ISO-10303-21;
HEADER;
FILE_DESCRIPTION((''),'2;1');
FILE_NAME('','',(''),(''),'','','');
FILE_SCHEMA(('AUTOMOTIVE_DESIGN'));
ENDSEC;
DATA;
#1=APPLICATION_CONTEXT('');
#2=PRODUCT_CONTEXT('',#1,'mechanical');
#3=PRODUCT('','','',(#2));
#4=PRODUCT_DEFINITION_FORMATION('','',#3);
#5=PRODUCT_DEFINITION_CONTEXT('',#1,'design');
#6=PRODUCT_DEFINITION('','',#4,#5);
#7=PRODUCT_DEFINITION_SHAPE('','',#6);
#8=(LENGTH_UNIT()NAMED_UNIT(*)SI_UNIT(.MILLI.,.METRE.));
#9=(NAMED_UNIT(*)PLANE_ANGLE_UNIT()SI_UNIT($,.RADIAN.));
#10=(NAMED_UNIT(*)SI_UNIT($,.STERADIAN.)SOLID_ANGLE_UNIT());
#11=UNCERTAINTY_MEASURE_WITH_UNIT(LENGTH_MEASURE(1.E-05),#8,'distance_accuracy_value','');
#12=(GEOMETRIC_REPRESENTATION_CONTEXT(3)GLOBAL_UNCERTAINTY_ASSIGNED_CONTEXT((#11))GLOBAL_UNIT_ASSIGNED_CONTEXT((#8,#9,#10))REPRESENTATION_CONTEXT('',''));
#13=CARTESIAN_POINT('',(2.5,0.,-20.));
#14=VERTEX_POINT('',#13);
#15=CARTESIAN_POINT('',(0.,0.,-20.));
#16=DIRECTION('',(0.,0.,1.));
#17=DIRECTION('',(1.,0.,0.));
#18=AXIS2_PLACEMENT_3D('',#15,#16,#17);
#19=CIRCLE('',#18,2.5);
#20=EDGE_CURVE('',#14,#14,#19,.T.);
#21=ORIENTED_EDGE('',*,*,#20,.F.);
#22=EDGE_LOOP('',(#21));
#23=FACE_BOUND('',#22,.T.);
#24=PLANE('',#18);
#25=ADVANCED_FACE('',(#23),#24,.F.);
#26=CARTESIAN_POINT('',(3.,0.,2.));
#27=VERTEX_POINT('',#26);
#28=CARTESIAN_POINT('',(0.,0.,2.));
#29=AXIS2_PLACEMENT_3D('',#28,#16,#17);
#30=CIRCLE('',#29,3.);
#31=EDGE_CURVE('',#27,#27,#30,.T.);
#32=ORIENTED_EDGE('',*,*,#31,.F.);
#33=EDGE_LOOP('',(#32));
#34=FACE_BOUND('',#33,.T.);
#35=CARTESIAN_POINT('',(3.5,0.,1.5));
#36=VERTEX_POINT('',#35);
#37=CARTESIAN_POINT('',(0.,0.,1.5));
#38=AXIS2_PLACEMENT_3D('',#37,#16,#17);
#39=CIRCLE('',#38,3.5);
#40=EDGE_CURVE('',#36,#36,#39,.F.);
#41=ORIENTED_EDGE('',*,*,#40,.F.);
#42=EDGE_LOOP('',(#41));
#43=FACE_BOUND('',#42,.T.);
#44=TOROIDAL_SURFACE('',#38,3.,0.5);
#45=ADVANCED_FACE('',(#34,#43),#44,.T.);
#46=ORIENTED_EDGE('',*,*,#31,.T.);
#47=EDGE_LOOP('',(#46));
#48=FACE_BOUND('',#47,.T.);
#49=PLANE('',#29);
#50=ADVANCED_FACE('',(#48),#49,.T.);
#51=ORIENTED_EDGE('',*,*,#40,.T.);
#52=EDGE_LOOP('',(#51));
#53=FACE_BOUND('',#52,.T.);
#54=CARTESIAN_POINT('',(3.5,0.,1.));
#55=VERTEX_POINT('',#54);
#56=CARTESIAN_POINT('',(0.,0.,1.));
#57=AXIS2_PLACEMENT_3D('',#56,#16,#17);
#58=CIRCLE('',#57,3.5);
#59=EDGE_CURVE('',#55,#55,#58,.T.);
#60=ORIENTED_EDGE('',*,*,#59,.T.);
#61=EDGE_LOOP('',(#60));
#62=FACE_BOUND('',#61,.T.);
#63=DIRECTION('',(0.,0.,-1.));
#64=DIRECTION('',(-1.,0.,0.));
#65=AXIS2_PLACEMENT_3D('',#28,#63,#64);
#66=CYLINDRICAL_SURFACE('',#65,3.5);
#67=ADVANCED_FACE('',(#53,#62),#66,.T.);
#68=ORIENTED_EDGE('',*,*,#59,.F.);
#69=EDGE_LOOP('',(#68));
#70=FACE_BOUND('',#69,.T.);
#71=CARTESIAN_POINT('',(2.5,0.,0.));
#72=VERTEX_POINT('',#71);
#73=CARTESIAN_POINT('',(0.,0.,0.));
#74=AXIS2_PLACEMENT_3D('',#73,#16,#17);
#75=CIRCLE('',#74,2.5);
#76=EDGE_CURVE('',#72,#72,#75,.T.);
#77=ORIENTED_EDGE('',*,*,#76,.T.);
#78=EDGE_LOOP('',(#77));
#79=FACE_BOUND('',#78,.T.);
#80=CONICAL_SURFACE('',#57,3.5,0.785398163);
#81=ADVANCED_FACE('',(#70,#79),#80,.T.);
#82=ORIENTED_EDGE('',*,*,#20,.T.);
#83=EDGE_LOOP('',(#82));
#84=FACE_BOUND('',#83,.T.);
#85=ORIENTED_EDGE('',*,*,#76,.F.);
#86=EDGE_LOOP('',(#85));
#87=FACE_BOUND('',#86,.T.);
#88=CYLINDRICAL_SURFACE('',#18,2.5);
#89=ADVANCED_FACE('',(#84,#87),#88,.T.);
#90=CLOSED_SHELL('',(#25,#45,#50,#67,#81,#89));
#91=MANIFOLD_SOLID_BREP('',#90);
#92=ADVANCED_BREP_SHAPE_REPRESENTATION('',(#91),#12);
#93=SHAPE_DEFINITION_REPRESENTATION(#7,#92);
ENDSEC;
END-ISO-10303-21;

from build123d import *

# Parameters (mm, degrees)
SKETCH1_R           = 2.5
BOSS_EXTRUDE1_DEPTH = 20
SKETCH1_3_R         = 3.5
BOSS_EXTRUDE2_DEPTH = 2
CHAMFER1_SIZE       = 1
FILLET1_R           = 0.5


with BuildPart() as part:
    # Sketch1 → Boss-Extrude1 (new body)
    with BuildSketch(Plane(origin=(0, 0, 0), x_dir=(0, 1, 0), z_dir=(0, 0, 1))):
        with Locations(Location((0, 0, 0), (0, 0, 270))):
            Circle(SKETCH1_R)
    extrude(amount=-BOSS_EXTRUDE1_DEPTH)

    # Sketch1<3> → Boss-Extrude2 (add)
    with BuildSketch(Plane(origin=(0, 0, 0), x_dir=(0, 1, 0), z_dir=(0, 0, 1))):
        with Locations(Location((0, 0, 0), (0, 0, 270))):
            Circle(SKETCH1_3_R)
    extrude(amount=BOSS_EXTRUDE2_DEPTH)

    # Chamfer1
    chamfer1_edges = [part.edges().sort_by_distance(p)[0] for p in [
        (-3.5, 0, 0),
    ]]
    chamfer(chamfer1_edges, length=CHAMFER1_SIZE - 0.0001)  # a hair under: the kernel refuses the full size

    # Fillet1
    fillet1_edges = [part.edges().sort_by_distance(p)[0] for p in [
        (-3.5, 0, 2),
    ]]
    fillet(fillet1_edges, radius=FILLET1_R)


solid = part.part
